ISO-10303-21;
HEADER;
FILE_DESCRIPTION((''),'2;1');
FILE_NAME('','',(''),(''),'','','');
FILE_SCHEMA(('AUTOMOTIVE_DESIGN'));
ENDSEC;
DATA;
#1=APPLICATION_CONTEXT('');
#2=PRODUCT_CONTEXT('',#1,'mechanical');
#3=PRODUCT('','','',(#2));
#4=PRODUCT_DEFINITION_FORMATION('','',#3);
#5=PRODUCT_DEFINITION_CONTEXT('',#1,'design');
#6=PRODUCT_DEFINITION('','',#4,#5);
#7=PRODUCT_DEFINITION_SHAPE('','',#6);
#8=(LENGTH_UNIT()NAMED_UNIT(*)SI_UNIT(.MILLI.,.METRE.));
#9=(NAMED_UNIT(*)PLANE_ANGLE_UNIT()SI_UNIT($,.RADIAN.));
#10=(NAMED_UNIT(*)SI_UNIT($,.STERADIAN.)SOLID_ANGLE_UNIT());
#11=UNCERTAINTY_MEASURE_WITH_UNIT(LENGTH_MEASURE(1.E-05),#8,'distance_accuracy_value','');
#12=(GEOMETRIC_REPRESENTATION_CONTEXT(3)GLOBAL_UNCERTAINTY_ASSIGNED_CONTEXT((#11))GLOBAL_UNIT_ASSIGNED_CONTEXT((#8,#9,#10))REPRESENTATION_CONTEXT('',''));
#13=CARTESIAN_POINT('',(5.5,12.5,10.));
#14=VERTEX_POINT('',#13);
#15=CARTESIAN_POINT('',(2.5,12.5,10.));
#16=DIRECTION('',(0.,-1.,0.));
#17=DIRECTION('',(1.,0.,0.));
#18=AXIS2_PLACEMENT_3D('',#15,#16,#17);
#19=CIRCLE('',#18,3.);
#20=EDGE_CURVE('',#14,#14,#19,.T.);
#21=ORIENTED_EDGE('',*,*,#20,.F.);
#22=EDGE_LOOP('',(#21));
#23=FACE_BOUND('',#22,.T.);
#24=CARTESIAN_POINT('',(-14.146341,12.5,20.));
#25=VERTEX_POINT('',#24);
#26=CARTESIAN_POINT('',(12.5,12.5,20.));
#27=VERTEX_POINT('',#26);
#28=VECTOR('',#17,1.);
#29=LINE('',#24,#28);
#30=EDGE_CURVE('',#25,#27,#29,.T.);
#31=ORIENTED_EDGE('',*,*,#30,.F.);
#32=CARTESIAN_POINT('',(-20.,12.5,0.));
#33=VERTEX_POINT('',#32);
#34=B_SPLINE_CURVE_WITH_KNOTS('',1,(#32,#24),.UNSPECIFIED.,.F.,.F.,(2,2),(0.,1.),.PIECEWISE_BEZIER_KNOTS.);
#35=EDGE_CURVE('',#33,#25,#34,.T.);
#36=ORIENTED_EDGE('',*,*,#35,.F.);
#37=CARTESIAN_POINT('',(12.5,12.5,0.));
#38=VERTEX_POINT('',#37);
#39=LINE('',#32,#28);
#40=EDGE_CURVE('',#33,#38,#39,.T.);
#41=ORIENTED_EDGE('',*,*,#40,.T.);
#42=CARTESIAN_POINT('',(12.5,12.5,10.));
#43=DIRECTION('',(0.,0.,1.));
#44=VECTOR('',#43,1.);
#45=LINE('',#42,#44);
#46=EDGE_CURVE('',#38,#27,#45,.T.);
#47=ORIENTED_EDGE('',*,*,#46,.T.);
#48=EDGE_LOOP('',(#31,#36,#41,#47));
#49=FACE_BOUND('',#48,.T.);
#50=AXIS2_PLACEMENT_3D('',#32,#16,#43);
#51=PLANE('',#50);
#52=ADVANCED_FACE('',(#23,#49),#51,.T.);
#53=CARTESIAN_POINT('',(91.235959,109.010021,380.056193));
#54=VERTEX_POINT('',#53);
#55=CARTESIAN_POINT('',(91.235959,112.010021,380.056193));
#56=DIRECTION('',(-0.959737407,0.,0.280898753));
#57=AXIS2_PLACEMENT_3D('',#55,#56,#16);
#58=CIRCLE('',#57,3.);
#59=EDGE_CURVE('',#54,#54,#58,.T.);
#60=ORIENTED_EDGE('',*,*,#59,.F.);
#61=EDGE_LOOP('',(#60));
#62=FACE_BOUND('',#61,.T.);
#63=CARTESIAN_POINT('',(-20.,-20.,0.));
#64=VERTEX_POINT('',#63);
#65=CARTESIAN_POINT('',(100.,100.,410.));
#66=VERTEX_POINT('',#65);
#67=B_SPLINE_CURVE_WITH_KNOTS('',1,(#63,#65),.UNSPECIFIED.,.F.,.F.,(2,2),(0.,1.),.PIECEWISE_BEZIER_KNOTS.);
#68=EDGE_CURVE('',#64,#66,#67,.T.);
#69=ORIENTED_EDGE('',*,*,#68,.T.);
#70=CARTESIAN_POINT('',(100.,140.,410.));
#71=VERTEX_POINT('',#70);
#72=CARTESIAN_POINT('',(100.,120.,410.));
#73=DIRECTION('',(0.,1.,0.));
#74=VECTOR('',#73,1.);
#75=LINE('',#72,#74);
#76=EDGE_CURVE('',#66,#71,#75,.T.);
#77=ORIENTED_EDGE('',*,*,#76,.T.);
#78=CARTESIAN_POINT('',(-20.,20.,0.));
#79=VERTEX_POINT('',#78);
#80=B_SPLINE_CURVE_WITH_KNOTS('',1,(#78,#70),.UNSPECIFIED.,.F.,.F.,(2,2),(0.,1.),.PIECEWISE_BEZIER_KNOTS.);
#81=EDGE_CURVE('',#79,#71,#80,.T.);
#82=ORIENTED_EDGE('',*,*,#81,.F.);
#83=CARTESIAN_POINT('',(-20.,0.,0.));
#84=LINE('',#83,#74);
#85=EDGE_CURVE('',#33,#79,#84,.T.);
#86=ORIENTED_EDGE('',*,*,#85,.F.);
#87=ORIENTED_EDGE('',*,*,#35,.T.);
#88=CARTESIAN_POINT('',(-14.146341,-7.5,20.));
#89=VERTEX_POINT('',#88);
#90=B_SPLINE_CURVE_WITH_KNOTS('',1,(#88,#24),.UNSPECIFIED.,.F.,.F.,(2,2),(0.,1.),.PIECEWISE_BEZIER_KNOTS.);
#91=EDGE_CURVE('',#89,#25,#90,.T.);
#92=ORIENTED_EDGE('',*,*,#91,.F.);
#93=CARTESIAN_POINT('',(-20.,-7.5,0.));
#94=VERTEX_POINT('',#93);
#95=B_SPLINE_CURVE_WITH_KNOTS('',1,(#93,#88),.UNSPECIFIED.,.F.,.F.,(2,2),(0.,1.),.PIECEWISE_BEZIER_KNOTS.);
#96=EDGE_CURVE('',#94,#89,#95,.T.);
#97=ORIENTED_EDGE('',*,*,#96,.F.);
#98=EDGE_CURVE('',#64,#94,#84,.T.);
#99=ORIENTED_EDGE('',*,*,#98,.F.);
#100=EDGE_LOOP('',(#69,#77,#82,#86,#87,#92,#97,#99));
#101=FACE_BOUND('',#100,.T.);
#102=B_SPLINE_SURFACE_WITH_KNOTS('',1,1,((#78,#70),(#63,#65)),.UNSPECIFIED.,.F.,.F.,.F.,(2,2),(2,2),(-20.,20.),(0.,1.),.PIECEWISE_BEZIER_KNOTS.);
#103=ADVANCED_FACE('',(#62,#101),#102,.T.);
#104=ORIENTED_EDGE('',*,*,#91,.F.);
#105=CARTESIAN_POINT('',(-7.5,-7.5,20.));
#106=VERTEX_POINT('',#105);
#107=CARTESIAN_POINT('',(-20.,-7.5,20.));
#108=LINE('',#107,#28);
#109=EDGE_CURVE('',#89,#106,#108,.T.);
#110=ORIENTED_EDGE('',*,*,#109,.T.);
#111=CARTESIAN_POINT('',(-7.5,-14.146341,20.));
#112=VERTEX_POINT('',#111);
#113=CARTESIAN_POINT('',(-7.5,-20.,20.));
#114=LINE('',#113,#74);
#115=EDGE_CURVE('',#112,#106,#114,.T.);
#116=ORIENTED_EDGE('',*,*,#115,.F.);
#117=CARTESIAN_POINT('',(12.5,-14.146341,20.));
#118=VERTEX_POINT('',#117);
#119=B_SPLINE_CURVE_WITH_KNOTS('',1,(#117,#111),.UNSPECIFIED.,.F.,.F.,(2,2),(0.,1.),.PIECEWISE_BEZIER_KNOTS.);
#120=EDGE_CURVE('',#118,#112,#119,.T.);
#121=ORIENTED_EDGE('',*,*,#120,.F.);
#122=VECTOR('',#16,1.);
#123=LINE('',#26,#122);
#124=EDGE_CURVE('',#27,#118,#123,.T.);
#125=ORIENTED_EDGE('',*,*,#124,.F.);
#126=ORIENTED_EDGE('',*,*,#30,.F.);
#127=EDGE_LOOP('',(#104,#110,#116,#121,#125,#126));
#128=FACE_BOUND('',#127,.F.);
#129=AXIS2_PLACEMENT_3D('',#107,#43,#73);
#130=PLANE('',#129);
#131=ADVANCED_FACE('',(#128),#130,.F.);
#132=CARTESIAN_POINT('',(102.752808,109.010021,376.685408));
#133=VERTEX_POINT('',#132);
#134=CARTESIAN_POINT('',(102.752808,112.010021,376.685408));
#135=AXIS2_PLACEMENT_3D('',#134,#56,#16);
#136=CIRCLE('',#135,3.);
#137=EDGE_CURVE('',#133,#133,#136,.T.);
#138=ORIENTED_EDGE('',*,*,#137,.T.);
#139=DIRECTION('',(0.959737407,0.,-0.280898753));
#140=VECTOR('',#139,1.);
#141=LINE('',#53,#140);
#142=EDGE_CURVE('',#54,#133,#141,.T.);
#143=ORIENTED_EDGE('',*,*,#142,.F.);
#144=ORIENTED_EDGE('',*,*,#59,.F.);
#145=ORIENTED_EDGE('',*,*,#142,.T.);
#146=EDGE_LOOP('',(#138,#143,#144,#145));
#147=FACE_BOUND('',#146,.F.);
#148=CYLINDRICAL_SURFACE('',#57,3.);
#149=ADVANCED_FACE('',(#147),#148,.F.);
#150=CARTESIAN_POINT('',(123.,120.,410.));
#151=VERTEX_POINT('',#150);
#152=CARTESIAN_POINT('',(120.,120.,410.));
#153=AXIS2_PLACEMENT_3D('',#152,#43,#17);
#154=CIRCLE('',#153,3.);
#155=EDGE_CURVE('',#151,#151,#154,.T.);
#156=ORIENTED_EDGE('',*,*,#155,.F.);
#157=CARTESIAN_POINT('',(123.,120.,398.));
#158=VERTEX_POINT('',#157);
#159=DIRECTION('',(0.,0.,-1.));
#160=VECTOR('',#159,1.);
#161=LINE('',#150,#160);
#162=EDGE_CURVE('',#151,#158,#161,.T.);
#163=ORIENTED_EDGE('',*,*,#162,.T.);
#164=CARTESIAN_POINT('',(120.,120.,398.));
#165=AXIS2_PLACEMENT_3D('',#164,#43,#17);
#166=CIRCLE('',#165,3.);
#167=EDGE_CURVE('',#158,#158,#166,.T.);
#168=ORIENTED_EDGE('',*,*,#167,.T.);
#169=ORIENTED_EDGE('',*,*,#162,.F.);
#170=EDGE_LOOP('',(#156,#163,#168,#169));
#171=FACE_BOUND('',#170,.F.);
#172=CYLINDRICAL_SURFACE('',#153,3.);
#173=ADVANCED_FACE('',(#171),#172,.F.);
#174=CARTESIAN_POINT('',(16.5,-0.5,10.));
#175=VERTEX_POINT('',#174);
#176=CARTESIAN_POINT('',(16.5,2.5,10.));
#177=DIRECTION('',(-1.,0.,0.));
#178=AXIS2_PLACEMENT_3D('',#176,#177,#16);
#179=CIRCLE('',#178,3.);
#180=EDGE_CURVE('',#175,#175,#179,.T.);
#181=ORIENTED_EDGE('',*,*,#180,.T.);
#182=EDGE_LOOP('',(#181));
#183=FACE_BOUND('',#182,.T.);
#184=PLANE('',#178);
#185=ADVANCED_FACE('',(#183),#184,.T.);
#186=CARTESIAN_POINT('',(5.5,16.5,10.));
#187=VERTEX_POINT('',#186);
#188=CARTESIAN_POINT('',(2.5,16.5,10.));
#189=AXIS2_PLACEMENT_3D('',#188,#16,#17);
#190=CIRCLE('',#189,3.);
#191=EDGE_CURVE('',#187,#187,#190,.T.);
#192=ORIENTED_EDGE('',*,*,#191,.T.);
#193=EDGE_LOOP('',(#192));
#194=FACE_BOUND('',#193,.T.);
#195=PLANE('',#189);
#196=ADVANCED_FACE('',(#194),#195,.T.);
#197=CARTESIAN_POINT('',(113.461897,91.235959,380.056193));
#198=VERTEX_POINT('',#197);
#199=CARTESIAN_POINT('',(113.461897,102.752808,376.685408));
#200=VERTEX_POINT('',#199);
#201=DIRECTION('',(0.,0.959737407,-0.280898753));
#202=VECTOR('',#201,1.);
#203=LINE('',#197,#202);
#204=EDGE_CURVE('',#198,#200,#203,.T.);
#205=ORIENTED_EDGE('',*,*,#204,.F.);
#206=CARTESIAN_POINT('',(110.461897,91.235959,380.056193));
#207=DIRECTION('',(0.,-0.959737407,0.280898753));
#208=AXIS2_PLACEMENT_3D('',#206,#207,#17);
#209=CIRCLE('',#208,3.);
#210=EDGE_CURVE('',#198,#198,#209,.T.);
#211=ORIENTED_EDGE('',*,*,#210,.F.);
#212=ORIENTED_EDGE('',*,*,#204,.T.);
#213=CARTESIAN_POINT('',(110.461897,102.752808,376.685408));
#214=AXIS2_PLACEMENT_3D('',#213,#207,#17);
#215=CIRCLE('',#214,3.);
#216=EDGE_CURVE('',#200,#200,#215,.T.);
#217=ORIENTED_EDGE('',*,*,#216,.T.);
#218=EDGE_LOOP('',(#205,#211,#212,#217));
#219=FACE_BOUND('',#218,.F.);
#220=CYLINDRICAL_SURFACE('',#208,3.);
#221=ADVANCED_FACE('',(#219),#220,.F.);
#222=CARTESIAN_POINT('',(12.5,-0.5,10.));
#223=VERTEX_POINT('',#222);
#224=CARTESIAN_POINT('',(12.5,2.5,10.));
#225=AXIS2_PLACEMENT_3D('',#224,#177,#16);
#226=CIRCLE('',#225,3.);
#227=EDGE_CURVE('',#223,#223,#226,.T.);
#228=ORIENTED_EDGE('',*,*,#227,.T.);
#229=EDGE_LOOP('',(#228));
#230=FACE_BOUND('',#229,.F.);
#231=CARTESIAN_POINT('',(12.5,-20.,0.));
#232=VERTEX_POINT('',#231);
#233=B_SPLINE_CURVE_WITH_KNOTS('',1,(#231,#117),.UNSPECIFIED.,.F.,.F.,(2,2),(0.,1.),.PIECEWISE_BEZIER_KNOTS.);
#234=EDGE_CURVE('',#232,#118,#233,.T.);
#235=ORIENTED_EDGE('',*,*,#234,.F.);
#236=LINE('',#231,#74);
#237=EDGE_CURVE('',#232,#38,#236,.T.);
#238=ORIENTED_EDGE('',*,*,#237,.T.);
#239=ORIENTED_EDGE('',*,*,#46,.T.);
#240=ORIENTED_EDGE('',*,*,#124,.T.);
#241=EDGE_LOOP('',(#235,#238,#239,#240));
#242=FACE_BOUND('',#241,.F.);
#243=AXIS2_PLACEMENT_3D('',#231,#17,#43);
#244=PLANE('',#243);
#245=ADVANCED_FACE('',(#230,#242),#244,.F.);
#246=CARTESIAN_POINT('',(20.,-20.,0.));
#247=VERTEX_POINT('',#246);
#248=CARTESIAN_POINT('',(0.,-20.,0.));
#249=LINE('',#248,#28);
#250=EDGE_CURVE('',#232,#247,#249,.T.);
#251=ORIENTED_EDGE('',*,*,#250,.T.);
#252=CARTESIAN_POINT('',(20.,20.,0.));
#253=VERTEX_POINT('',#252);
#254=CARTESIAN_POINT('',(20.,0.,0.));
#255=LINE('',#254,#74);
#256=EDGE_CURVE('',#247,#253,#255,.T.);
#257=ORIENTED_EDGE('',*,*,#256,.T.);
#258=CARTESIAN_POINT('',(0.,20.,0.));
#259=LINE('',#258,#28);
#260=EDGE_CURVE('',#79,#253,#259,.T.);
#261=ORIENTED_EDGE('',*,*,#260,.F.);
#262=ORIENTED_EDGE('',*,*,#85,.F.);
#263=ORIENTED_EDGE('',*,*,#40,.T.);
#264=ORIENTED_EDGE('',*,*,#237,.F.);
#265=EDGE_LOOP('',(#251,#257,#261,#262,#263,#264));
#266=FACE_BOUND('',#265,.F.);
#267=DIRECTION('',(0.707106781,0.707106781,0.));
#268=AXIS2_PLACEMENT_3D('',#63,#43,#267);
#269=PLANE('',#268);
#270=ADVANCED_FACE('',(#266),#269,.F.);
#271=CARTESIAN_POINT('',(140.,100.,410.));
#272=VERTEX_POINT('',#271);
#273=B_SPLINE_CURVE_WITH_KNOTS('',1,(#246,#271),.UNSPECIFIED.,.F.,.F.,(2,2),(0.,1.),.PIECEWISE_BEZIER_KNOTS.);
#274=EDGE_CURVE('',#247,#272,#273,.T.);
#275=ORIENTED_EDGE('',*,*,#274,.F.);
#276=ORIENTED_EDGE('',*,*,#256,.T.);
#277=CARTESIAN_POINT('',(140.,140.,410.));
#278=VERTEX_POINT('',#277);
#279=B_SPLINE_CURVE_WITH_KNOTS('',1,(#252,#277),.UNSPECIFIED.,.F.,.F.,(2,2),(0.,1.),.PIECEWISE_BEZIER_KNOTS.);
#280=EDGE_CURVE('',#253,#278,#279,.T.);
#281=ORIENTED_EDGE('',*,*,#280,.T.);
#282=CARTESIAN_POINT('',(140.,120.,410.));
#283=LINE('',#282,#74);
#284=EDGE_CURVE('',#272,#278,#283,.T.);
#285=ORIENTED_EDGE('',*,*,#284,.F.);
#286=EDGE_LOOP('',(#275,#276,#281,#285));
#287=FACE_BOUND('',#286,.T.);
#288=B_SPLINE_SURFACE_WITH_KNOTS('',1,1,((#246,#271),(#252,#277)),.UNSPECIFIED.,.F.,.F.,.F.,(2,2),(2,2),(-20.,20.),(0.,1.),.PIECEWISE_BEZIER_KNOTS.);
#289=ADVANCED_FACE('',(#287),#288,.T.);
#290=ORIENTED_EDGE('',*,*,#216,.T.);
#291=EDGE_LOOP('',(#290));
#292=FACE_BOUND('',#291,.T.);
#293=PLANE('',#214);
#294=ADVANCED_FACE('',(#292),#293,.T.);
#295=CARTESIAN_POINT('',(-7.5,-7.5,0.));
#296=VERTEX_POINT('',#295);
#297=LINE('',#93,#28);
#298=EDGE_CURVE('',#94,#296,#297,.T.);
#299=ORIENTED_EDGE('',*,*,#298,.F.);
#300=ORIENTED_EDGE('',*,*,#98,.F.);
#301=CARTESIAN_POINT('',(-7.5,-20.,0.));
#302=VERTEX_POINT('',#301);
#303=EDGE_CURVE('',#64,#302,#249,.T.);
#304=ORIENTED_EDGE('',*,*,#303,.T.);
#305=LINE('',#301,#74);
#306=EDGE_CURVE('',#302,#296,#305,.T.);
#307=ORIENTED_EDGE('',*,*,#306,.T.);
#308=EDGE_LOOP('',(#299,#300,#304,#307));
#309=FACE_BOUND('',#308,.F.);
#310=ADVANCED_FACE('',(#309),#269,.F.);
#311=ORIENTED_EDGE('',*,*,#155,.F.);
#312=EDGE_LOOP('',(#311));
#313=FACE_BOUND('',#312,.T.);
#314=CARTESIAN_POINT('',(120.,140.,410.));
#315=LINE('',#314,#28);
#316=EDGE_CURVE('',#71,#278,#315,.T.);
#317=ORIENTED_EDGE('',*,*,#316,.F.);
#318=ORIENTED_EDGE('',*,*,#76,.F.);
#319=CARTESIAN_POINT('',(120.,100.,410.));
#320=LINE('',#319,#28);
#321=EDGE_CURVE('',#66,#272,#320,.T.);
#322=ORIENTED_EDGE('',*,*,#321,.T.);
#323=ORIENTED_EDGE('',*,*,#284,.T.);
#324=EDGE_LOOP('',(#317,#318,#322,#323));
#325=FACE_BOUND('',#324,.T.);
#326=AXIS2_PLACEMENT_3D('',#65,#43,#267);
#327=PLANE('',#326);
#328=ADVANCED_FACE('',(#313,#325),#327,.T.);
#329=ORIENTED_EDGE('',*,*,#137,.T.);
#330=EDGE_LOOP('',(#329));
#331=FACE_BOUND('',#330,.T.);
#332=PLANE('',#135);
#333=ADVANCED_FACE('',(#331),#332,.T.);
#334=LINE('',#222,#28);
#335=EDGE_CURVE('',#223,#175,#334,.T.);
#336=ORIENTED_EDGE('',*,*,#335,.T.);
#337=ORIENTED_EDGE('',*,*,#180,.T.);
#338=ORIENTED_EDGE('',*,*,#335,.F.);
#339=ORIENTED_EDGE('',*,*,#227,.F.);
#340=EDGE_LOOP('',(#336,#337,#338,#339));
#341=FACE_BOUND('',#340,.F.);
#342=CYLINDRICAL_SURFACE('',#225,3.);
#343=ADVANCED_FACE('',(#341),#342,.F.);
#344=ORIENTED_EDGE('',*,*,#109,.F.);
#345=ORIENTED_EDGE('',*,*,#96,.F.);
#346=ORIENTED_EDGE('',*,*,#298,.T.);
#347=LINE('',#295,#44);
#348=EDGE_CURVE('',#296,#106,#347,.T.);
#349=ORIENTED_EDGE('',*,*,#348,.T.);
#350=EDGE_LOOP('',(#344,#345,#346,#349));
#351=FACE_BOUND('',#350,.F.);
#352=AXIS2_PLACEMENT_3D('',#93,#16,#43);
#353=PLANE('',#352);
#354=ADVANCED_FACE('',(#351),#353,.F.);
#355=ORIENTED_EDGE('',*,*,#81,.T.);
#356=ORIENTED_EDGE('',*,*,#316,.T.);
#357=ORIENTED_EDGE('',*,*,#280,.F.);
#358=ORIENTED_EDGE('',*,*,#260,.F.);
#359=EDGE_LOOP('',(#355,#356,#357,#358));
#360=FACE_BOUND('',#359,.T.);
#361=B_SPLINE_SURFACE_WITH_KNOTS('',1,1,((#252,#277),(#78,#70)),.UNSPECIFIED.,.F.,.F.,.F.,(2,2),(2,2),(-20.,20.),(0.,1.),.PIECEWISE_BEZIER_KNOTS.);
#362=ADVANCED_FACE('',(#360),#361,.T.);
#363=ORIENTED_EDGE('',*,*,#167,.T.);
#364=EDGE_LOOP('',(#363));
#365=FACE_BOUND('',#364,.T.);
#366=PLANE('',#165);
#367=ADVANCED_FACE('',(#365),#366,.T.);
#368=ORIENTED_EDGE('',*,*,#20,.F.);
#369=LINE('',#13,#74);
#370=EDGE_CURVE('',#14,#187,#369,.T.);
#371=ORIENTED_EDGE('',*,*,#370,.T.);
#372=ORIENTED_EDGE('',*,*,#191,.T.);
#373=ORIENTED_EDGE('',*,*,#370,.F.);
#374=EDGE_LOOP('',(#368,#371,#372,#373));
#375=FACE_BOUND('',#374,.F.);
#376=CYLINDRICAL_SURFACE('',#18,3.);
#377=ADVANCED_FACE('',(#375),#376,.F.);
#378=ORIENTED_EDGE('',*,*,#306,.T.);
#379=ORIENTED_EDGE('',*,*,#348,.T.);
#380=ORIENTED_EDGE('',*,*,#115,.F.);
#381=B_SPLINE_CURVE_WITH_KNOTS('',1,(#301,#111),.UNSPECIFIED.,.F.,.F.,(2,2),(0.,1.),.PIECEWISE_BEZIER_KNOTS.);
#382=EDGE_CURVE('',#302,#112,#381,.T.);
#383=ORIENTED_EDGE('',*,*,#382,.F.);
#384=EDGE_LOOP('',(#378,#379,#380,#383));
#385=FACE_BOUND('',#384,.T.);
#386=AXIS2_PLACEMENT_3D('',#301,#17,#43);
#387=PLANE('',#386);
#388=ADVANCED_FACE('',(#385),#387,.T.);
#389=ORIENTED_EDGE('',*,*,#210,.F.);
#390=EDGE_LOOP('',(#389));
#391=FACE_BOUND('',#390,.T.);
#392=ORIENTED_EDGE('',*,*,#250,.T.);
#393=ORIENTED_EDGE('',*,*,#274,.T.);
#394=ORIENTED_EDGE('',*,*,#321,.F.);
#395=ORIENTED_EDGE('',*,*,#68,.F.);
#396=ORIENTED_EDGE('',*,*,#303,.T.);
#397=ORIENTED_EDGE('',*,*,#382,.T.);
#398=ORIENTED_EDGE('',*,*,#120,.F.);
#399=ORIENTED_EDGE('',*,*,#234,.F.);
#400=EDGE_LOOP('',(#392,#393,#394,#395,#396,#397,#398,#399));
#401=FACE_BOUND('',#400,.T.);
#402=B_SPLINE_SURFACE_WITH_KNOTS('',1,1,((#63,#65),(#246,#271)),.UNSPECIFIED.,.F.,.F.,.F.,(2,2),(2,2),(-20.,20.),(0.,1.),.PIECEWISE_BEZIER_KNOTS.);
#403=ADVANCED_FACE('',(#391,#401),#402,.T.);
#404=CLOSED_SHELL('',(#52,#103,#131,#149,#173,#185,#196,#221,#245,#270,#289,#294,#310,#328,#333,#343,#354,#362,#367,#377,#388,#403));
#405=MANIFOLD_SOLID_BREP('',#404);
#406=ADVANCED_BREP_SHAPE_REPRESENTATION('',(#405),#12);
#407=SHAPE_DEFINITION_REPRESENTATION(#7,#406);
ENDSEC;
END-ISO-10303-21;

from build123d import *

# Parameters (mm, degrees)
F0_W      = 40
F0_H      = 40
F2_W      = 40
F2_H      = 40
F4_R      = 3
F5_DEPTH  = 12
F6_R      = 3
F7_DEPTH  = 12
F8_R      = 3
F9_DEPTH  = 12
F11_W     = 20
F11_H     = 20
F12_DEPTH = 32.5
F14_W     = 20
F14_H     = 20
F15_DEPTH = 32.5
F16_R     = 3
F17_DEPTH = 4
F18_R     = 3
F19_DEPTH = 4


with BuildPart() as f3:
    # F0 (on Top) → F3 section 0
    with BuildSketch(Plane.XY):
        Rectangle(F0_W, F0_H)
    # F2 (on offset) → F3 section 1
    with BuildSketch(Plane.XY.offset(410)):
        with Locations((120, 120)):
            Rectangle(F2_W, F2_H)
    loft()

    # F4 (on face) → F5 (cut)
    with BuildSketch(Plane(origin=(-18.4219178082, 0, 5.3917808219), x_dir=(0, -1, 0), z_dir=(-0.959737407, 0, 0.2808987533))):
        with Locations((-112.0100207019, 390.3822122005)):
            Circle(F4_R)
    extrude(amount=-F5_DEPTH, mode=Mode.SUBTRACT)

    # F6 (on face) → F7 (cut)
    with BuildSketch(Plane(origin=(0, -18.4219178082, 5.3917808219), x_dir=(1, 0, 0), z_dir=(0, -0.959737407, 0.2808987533))):
        with Locations((110.461897094, 390.3822122005)):
            Circle(F6_R)
    extrude(amount=-F7_DEPTH, mode=Mode.SUBTRACT)

    # F8 (on face) → F9 (cut)
    with BuildSketch(Plane.XY.offset(410)):
        with Locations((120, 120)):
            Circle(F8_R)
    extrude(amount=-F9_DEPTH, mode=Mode.SUBTRACT)

    # F11 (on offset) → F12 (cut)
    with BuildSketch(Plane.YZ.offset(-20)):
        with Locations((2.5, 10)):
            Rectangle(F11_W, F11_H)
    extrude(amount=F12_DEPTH, mode=Mode.SUBTRACT)

    # F14 (on offset) → F15 (cut)
    with BuildSketch(Plane.XZ.offset(20)):
        with Locations((2.5, 10)):
            Rectangle(F14_W, F14_H)
    extrude(amount=-F15_DEPTH, mode=Mode.SUBTRACT)

    # F16 (on face) → F17 (cut)
    with BuildSketch(Plane.XZ.offset(-12.5)):
        with Locations((2.5, 10)):
            Circle(F16_R)
    extrude(amount=-F17_DEPTH, mode=Mode.SUBTRACT)

    # F18 (on face) → F19 (cut)
    with BuildSketch(Plane(origin=(12.5, 0, 0), x_dir=(0, -1, 0), z_dir=(-1, 0, 0))):
        with Locations((-2.5, 10)):
            Circle(F18_R)
    extrude(amount=-F19_DEPTH, mode=Mode.SUBTRACT)


solid = f3.part
